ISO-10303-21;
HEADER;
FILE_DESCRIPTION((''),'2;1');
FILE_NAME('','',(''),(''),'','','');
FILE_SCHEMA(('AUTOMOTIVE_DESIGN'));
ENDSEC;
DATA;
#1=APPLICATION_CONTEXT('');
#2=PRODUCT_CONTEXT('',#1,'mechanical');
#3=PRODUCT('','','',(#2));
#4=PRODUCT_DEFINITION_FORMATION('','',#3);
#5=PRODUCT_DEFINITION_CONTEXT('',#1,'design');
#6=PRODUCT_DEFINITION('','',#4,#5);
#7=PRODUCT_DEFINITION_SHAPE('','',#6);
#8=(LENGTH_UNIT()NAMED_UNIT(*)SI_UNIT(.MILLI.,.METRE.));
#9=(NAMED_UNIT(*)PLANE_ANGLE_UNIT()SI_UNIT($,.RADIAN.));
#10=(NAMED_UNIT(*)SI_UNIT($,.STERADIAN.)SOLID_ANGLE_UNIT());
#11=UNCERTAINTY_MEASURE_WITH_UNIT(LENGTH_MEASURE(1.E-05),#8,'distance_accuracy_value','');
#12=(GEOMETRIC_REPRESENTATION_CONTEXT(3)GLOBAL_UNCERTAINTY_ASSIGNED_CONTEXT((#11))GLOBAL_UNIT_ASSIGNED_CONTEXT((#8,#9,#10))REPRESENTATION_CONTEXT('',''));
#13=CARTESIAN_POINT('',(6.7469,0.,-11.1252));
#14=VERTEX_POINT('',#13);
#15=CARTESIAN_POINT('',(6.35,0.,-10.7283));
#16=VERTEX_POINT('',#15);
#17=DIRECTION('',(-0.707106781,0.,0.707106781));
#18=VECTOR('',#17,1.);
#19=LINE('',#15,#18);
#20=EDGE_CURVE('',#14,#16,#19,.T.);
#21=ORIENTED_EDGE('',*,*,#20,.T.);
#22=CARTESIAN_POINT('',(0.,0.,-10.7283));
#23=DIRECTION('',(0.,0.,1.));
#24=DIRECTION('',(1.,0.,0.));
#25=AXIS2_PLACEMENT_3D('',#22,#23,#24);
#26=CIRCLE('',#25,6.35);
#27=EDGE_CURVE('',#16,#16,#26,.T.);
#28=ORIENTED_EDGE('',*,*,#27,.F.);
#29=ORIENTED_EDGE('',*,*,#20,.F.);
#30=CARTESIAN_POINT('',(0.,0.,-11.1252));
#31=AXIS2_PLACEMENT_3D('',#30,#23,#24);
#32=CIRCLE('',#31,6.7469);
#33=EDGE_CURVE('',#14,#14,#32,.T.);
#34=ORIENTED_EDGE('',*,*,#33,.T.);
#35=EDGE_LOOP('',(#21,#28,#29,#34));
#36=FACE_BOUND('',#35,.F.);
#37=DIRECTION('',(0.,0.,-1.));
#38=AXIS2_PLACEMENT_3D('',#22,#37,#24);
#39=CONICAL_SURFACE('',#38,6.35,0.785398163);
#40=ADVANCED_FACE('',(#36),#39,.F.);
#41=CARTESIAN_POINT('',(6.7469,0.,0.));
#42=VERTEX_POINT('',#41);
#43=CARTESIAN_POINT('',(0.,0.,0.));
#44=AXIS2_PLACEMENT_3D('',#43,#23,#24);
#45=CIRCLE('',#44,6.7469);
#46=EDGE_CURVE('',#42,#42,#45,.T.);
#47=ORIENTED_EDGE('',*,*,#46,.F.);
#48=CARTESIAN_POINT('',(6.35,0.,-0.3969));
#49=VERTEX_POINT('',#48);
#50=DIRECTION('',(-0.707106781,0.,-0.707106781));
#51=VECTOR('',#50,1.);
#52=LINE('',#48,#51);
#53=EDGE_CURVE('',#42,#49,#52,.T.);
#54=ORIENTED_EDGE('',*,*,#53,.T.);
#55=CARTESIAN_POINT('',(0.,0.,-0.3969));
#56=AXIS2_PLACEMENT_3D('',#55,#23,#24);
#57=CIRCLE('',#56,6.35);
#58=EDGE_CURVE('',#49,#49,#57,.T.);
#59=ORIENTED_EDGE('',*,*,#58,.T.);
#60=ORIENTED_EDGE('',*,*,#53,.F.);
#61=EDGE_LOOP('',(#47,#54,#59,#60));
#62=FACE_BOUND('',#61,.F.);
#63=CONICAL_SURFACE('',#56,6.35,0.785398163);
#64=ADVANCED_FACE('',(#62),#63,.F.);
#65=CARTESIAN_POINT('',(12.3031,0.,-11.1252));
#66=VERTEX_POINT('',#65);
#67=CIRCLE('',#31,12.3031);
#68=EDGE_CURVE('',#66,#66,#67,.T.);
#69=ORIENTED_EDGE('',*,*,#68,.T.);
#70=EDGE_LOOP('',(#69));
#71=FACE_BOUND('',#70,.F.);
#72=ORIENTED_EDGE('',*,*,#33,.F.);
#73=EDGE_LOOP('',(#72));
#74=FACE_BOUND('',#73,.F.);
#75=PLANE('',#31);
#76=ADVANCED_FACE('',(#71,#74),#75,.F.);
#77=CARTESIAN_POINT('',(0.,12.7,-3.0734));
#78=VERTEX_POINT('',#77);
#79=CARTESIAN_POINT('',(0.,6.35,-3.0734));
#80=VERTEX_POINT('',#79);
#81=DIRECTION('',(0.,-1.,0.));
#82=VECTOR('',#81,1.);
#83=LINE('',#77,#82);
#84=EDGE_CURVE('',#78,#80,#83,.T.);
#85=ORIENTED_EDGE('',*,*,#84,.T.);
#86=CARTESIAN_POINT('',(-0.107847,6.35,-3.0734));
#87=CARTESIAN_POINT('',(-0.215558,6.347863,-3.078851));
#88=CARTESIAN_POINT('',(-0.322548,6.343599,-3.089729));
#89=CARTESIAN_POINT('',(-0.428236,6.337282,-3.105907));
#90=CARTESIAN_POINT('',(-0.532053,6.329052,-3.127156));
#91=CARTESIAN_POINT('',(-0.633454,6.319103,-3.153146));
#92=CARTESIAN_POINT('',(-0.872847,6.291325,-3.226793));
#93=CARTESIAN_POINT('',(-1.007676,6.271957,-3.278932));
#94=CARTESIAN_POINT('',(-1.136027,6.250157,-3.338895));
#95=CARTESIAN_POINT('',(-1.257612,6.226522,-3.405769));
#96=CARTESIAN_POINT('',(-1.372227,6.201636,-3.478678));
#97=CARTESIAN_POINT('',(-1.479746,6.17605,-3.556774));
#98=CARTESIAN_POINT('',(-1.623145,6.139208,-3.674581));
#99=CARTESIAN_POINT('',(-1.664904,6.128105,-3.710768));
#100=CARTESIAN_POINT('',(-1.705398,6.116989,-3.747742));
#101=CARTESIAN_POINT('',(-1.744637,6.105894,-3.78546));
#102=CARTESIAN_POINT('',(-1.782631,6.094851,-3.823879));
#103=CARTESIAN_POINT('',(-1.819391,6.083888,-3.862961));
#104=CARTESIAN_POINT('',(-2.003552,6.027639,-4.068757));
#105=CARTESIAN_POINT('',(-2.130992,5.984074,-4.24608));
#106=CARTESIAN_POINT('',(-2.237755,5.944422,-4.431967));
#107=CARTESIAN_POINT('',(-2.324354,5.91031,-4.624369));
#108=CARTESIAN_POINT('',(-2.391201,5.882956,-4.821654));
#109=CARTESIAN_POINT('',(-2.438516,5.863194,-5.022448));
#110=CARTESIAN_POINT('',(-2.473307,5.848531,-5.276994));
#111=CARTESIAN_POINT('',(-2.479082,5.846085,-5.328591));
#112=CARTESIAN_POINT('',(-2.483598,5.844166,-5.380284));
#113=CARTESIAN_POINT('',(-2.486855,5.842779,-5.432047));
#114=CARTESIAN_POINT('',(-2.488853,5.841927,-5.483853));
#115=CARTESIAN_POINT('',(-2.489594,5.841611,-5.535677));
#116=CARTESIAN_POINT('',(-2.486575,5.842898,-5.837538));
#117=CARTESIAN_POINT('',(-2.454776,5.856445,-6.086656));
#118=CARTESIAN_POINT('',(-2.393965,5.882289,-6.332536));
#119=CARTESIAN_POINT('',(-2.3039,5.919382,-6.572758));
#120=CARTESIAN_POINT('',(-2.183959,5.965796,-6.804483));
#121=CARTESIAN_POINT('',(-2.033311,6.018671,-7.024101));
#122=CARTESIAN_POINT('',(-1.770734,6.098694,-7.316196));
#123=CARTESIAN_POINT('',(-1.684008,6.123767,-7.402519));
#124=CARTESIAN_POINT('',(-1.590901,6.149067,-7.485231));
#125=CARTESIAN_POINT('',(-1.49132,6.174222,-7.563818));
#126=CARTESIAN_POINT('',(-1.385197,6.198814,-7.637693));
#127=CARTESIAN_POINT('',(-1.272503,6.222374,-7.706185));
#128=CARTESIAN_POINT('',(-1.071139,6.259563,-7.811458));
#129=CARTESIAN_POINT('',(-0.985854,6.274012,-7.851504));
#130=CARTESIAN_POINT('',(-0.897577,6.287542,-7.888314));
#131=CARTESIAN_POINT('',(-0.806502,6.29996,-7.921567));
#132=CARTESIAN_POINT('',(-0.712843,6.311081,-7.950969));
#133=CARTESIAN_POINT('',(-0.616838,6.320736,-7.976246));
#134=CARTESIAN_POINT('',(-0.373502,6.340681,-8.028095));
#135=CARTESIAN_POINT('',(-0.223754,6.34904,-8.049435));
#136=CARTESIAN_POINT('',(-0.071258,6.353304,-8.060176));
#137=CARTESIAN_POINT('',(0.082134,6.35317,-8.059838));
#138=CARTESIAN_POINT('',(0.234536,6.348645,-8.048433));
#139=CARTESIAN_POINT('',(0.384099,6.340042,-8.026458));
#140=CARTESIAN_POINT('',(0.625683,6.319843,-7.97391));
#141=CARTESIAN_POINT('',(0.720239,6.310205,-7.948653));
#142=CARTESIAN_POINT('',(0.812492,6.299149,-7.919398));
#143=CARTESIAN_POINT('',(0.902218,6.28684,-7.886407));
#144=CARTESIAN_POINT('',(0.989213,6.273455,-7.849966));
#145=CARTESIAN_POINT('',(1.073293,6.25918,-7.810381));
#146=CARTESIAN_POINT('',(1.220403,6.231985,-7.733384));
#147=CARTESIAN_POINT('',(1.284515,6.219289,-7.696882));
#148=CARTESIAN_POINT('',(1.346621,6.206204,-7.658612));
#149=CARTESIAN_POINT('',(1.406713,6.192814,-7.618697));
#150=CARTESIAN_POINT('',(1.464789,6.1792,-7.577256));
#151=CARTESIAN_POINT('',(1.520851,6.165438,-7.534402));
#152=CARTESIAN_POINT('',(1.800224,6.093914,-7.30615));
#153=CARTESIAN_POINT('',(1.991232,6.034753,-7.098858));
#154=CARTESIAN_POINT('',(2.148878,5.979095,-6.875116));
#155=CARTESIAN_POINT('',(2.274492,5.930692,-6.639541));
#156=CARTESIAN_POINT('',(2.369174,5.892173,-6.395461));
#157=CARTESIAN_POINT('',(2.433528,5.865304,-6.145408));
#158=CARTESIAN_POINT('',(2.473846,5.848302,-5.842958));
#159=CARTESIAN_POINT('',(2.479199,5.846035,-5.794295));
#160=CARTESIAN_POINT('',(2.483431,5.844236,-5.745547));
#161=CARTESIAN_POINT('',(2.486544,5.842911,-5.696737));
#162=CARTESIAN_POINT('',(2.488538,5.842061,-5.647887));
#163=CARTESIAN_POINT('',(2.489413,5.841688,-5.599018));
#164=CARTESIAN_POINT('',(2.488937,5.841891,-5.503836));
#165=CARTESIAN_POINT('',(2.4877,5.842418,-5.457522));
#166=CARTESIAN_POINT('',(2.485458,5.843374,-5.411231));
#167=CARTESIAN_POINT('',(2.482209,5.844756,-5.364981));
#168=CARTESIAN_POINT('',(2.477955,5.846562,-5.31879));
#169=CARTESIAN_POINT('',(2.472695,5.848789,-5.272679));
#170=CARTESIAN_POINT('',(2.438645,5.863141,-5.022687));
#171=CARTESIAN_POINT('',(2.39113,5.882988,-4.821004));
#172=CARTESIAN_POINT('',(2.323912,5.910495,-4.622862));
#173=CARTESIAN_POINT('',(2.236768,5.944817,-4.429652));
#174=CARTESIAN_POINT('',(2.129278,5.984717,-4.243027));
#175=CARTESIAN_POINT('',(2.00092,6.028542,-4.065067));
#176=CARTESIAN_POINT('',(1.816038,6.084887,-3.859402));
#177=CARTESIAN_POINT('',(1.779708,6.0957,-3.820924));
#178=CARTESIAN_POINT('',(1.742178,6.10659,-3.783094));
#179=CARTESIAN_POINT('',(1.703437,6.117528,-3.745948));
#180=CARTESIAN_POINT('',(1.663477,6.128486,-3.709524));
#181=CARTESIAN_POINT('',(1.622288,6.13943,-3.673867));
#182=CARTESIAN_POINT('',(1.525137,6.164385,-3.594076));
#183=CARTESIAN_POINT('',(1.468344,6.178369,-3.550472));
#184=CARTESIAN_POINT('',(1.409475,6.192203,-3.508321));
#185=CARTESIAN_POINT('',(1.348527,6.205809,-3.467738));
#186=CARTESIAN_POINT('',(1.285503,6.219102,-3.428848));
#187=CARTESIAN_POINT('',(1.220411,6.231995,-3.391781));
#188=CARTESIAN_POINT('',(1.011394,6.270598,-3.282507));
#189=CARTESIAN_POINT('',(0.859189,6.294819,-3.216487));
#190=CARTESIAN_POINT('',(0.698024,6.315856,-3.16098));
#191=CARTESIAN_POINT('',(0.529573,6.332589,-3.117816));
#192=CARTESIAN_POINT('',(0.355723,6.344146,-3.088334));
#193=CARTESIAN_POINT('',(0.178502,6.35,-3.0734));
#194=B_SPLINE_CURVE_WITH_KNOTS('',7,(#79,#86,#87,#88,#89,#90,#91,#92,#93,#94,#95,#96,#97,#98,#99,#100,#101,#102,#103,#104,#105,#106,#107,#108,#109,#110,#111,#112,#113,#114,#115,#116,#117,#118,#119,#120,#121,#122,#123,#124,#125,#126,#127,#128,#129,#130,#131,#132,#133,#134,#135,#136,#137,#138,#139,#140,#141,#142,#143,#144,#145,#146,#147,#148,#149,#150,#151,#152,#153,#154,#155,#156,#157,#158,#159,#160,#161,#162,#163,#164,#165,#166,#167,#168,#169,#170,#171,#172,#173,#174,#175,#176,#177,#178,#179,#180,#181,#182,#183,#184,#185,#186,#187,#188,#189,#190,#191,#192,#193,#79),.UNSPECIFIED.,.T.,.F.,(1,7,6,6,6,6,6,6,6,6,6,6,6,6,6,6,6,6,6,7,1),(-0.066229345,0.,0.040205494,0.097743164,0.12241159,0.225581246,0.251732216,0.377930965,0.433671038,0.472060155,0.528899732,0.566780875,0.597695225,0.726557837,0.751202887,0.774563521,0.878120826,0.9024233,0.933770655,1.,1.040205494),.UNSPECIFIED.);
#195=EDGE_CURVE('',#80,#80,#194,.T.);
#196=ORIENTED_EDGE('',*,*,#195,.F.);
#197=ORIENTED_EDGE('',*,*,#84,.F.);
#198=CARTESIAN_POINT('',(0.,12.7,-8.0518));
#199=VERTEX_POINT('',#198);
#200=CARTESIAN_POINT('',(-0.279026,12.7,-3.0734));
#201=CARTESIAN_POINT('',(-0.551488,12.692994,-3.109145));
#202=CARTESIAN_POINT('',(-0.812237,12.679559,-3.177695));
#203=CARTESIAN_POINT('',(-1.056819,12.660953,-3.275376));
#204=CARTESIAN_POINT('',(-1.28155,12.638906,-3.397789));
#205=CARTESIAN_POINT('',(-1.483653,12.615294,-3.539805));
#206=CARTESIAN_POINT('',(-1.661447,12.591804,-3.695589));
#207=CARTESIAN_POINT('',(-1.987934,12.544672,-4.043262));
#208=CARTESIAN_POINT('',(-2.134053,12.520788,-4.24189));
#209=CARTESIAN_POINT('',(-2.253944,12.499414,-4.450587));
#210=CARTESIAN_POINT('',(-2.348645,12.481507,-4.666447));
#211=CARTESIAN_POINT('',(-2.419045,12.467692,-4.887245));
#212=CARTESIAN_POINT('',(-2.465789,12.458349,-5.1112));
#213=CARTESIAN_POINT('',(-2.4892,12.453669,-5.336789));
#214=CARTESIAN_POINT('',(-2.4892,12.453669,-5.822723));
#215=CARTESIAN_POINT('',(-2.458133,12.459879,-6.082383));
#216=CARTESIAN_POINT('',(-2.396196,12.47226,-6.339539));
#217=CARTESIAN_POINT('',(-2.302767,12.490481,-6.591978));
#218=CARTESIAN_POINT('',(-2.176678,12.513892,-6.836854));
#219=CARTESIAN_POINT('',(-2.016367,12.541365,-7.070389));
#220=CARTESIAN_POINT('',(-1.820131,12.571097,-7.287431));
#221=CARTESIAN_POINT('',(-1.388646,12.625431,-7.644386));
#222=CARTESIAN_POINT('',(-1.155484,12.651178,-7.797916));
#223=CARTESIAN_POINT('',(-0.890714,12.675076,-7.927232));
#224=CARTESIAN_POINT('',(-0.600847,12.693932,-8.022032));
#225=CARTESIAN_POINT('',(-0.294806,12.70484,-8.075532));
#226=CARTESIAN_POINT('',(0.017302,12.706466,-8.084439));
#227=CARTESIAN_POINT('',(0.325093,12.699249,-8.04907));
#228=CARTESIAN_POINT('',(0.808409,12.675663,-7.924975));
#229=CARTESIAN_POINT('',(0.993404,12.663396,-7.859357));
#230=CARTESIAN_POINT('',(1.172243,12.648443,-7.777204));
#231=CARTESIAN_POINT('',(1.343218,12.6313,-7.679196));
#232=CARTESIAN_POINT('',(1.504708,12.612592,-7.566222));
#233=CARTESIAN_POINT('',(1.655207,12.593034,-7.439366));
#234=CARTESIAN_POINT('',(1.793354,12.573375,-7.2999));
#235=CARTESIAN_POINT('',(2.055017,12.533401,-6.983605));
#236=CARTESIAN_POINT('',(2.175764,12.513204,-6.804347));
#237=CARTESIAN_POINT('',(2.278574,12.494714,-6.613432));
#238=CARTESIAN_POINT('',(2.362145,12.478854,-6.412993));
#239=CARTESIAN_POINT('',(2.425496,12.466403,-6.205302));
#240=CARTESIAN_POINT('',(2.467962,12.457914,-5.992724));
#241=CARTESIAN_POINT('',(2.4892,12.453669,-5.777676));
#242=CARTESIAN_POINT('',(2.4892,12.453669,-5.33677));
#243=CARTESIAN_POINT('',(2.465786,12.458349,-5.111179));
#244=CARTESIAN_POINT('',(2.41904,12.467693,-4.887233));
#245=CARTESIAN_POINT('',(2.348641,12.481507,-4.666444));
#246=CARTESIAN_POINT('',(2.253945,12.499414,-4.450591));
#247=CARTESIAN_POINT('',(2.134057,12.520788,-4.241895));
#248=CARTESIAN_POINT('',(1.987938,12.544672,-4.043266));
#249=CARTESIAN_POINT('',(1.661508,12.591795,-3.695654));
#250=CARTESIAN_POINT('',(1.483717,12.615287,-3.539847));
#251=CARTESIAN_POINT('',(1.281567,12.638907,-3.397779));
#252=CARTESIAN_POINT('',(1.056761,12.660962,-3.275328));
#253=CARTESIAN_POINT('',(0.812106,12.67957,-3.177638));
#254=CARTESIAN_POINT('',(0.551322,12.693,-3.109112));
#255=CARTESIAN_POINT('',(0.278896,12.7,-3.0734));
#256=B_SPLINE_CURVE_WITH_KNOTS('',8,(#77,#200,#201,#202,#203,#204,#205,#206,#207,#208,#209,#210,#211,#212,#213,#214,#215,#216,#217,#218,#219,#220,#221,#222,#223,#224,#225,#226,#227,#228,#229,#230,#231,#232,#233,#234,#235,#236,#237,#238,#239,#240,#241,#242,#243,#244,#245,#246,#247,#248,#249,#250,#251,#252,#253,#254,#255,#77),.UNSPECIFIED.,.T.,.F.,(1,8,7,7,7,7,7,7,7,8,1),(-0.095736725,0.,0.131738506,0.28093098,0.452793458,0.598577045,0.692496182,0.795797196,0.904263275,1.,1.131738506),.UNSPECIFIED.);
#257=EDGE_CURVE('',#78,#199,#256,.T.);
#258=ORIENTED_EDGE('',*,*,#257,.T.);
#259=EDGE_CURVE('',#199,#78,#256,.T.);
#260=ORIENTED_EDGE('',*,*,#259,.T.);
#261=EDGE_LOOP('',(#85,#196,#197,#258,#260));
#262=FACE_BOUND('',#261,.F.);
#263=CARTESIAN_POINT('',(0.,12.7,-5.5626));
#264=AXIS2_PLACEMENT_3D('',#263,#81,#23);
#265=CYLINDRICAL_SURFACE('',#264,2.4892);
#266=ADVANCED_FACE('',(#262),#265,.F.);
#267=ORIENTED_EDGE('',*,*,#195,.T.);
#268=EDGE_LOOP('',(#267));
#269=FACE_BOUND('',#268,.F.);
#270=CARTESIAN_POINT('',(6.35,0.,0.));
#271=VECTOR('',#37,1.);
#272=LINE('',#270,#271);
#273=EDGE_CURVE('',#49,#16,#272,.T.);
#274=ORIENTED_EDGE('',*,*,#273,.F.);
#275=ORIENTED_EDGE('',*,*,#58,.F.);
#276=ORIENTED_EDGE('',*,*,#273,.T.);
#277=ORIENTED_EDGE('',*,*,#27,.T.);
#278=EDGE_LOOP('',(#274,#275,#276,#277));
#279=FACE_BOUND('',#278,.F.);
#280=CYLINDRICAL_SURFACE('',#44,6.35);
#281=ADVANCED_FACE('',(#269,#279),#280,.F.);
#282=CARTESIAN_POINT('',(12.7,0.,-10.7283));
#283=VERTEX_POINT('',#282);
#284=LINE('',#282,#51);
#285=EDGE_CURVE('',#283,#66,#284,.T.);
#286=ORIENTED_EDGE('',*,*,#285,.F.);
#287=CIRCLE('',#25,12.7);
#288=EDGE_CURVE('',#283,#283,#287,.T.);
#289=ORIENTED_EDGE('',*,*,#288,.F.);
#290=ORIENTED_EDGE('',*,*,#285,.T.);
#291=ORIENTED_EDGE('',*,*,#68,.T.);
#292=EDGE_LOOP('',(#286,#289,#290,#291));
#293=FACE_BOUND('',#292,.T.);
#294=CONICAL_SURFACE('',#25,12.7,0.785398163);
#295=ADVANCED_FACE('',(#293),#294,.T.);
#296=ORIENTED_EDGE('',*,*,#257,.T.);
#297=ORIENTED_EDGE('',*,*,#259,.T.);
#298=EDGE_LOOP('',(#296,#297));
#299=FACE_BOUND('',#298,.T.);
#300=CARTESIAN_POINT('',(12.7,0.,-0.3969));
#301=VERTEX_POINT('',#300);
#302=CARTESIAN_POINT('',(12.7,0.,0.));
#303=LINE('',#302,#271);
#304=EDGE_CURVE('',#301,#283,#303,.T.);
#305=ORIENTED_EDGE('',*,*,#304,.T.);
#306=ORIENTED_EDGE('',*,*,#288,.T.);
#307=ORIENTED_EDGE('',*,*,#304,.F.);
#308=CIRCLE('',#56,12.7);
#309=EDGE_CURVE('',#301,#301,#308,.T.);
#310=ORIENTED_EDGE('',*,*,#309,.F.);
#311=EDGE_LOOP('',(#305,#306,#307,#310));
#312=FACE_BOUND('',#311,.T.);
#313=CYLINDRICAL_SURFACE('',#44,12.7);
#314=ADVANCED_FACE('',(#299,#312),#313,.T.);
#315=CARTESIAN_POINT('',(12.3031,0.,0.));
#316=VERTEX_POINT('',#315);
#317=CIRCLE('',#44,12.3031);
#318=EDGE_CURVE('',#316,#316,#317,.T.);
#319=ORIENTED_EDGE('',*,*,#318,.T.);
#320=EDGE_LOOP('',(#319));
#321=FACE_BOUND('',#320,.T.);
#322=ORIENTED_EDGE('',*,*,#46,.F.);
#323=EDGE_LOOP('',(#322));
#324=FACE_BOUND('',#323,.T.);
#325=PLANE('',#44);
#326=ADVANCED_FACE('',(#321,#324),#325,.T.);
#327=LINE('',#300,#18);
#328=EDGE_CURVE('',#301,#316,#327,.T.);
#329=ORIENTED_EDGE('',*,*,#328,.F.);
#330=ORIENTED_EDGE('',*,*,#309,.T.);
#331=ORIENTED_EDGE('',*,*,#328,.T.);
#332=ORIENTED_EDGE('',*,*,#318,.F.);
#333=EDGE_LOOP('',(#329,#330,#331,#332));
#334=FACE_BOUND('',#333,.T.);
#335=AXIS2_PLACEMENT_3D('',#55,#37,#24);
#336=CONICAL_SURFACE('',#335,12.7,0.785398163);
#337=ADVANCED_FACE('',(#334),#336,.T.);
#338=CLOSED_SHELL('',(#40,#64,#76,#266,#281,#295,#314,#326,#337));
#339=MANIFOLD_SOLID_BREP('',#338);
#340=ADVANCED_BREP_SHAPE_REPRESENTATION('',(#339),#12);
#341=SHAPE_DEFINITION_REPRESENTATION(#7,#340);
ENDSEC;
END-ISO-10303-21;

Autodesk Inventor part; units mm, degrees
ref_plane "YZ Plane" through (0, 0, 0) normal (1, 0, 0) x (0, 1, 0)
ref_plane "XY Plane" through (0, 0, 0) normal (0, 0, 1) x (1, 0, 0)
sketch "Sketch1" plane through (0, 0, 0) normal (0, 0, 1) x (1, 0, 0)
  circle A0 centre (0, 0) radius 12.7
  dimension "d0" = 25.4
extrude "Extrusion1" add sketch "Sketch1" against normal blind 11.1252
sketch "Sketch2" plane through (0, 0, 0) normal (0, 0, 1) x (1, 0, 0)
  circle A0 centre (0, 0) radius 12.7 projected
  circle A1 centre (0, 0) radius 6.35
  dimension "d3" = 12.7
extrude "Extrusion2" cut sketch "Sketch2" against normal up to next contours A1
chamfer "Chamfer1" distance 0.3969 angle 45 4 edges at (-12.7, 0, 0) (-12.7, 0, -11.1252) (-6.35, 0, 0) (-6.35, 0, -11.1252)
ref_plane "Work Plane1" through (0, 12.7, 0) normal (0, 1, 0) x (-1, 0, 0)
sketch "Sketch3" plane through (0, 12.7, 0) normal (0, 1, 0) x (-1, 0, 0)
  line L0 (12.3031, -11.1252) -> (-12.3031, -11.1252) projected
  line L1 (12.7, -0.3969) -> (12.7, -10.7283) projected
  point P0 (0, 0)
  point P1 (0, -5.5626)
  point P2 (0, -11.1252)
  point P3 (12.7, -5.5626)
hole "Hole1" at (0, 12.7, -5.5626) direction (0, -1, 0) diameter 4.9784 end up to surface thread size "1/4-20 UNC" class "2B" standard "ANSI Unified Screw Threads"
properties part number "SC-8-F" material "Steel, Carbon"
